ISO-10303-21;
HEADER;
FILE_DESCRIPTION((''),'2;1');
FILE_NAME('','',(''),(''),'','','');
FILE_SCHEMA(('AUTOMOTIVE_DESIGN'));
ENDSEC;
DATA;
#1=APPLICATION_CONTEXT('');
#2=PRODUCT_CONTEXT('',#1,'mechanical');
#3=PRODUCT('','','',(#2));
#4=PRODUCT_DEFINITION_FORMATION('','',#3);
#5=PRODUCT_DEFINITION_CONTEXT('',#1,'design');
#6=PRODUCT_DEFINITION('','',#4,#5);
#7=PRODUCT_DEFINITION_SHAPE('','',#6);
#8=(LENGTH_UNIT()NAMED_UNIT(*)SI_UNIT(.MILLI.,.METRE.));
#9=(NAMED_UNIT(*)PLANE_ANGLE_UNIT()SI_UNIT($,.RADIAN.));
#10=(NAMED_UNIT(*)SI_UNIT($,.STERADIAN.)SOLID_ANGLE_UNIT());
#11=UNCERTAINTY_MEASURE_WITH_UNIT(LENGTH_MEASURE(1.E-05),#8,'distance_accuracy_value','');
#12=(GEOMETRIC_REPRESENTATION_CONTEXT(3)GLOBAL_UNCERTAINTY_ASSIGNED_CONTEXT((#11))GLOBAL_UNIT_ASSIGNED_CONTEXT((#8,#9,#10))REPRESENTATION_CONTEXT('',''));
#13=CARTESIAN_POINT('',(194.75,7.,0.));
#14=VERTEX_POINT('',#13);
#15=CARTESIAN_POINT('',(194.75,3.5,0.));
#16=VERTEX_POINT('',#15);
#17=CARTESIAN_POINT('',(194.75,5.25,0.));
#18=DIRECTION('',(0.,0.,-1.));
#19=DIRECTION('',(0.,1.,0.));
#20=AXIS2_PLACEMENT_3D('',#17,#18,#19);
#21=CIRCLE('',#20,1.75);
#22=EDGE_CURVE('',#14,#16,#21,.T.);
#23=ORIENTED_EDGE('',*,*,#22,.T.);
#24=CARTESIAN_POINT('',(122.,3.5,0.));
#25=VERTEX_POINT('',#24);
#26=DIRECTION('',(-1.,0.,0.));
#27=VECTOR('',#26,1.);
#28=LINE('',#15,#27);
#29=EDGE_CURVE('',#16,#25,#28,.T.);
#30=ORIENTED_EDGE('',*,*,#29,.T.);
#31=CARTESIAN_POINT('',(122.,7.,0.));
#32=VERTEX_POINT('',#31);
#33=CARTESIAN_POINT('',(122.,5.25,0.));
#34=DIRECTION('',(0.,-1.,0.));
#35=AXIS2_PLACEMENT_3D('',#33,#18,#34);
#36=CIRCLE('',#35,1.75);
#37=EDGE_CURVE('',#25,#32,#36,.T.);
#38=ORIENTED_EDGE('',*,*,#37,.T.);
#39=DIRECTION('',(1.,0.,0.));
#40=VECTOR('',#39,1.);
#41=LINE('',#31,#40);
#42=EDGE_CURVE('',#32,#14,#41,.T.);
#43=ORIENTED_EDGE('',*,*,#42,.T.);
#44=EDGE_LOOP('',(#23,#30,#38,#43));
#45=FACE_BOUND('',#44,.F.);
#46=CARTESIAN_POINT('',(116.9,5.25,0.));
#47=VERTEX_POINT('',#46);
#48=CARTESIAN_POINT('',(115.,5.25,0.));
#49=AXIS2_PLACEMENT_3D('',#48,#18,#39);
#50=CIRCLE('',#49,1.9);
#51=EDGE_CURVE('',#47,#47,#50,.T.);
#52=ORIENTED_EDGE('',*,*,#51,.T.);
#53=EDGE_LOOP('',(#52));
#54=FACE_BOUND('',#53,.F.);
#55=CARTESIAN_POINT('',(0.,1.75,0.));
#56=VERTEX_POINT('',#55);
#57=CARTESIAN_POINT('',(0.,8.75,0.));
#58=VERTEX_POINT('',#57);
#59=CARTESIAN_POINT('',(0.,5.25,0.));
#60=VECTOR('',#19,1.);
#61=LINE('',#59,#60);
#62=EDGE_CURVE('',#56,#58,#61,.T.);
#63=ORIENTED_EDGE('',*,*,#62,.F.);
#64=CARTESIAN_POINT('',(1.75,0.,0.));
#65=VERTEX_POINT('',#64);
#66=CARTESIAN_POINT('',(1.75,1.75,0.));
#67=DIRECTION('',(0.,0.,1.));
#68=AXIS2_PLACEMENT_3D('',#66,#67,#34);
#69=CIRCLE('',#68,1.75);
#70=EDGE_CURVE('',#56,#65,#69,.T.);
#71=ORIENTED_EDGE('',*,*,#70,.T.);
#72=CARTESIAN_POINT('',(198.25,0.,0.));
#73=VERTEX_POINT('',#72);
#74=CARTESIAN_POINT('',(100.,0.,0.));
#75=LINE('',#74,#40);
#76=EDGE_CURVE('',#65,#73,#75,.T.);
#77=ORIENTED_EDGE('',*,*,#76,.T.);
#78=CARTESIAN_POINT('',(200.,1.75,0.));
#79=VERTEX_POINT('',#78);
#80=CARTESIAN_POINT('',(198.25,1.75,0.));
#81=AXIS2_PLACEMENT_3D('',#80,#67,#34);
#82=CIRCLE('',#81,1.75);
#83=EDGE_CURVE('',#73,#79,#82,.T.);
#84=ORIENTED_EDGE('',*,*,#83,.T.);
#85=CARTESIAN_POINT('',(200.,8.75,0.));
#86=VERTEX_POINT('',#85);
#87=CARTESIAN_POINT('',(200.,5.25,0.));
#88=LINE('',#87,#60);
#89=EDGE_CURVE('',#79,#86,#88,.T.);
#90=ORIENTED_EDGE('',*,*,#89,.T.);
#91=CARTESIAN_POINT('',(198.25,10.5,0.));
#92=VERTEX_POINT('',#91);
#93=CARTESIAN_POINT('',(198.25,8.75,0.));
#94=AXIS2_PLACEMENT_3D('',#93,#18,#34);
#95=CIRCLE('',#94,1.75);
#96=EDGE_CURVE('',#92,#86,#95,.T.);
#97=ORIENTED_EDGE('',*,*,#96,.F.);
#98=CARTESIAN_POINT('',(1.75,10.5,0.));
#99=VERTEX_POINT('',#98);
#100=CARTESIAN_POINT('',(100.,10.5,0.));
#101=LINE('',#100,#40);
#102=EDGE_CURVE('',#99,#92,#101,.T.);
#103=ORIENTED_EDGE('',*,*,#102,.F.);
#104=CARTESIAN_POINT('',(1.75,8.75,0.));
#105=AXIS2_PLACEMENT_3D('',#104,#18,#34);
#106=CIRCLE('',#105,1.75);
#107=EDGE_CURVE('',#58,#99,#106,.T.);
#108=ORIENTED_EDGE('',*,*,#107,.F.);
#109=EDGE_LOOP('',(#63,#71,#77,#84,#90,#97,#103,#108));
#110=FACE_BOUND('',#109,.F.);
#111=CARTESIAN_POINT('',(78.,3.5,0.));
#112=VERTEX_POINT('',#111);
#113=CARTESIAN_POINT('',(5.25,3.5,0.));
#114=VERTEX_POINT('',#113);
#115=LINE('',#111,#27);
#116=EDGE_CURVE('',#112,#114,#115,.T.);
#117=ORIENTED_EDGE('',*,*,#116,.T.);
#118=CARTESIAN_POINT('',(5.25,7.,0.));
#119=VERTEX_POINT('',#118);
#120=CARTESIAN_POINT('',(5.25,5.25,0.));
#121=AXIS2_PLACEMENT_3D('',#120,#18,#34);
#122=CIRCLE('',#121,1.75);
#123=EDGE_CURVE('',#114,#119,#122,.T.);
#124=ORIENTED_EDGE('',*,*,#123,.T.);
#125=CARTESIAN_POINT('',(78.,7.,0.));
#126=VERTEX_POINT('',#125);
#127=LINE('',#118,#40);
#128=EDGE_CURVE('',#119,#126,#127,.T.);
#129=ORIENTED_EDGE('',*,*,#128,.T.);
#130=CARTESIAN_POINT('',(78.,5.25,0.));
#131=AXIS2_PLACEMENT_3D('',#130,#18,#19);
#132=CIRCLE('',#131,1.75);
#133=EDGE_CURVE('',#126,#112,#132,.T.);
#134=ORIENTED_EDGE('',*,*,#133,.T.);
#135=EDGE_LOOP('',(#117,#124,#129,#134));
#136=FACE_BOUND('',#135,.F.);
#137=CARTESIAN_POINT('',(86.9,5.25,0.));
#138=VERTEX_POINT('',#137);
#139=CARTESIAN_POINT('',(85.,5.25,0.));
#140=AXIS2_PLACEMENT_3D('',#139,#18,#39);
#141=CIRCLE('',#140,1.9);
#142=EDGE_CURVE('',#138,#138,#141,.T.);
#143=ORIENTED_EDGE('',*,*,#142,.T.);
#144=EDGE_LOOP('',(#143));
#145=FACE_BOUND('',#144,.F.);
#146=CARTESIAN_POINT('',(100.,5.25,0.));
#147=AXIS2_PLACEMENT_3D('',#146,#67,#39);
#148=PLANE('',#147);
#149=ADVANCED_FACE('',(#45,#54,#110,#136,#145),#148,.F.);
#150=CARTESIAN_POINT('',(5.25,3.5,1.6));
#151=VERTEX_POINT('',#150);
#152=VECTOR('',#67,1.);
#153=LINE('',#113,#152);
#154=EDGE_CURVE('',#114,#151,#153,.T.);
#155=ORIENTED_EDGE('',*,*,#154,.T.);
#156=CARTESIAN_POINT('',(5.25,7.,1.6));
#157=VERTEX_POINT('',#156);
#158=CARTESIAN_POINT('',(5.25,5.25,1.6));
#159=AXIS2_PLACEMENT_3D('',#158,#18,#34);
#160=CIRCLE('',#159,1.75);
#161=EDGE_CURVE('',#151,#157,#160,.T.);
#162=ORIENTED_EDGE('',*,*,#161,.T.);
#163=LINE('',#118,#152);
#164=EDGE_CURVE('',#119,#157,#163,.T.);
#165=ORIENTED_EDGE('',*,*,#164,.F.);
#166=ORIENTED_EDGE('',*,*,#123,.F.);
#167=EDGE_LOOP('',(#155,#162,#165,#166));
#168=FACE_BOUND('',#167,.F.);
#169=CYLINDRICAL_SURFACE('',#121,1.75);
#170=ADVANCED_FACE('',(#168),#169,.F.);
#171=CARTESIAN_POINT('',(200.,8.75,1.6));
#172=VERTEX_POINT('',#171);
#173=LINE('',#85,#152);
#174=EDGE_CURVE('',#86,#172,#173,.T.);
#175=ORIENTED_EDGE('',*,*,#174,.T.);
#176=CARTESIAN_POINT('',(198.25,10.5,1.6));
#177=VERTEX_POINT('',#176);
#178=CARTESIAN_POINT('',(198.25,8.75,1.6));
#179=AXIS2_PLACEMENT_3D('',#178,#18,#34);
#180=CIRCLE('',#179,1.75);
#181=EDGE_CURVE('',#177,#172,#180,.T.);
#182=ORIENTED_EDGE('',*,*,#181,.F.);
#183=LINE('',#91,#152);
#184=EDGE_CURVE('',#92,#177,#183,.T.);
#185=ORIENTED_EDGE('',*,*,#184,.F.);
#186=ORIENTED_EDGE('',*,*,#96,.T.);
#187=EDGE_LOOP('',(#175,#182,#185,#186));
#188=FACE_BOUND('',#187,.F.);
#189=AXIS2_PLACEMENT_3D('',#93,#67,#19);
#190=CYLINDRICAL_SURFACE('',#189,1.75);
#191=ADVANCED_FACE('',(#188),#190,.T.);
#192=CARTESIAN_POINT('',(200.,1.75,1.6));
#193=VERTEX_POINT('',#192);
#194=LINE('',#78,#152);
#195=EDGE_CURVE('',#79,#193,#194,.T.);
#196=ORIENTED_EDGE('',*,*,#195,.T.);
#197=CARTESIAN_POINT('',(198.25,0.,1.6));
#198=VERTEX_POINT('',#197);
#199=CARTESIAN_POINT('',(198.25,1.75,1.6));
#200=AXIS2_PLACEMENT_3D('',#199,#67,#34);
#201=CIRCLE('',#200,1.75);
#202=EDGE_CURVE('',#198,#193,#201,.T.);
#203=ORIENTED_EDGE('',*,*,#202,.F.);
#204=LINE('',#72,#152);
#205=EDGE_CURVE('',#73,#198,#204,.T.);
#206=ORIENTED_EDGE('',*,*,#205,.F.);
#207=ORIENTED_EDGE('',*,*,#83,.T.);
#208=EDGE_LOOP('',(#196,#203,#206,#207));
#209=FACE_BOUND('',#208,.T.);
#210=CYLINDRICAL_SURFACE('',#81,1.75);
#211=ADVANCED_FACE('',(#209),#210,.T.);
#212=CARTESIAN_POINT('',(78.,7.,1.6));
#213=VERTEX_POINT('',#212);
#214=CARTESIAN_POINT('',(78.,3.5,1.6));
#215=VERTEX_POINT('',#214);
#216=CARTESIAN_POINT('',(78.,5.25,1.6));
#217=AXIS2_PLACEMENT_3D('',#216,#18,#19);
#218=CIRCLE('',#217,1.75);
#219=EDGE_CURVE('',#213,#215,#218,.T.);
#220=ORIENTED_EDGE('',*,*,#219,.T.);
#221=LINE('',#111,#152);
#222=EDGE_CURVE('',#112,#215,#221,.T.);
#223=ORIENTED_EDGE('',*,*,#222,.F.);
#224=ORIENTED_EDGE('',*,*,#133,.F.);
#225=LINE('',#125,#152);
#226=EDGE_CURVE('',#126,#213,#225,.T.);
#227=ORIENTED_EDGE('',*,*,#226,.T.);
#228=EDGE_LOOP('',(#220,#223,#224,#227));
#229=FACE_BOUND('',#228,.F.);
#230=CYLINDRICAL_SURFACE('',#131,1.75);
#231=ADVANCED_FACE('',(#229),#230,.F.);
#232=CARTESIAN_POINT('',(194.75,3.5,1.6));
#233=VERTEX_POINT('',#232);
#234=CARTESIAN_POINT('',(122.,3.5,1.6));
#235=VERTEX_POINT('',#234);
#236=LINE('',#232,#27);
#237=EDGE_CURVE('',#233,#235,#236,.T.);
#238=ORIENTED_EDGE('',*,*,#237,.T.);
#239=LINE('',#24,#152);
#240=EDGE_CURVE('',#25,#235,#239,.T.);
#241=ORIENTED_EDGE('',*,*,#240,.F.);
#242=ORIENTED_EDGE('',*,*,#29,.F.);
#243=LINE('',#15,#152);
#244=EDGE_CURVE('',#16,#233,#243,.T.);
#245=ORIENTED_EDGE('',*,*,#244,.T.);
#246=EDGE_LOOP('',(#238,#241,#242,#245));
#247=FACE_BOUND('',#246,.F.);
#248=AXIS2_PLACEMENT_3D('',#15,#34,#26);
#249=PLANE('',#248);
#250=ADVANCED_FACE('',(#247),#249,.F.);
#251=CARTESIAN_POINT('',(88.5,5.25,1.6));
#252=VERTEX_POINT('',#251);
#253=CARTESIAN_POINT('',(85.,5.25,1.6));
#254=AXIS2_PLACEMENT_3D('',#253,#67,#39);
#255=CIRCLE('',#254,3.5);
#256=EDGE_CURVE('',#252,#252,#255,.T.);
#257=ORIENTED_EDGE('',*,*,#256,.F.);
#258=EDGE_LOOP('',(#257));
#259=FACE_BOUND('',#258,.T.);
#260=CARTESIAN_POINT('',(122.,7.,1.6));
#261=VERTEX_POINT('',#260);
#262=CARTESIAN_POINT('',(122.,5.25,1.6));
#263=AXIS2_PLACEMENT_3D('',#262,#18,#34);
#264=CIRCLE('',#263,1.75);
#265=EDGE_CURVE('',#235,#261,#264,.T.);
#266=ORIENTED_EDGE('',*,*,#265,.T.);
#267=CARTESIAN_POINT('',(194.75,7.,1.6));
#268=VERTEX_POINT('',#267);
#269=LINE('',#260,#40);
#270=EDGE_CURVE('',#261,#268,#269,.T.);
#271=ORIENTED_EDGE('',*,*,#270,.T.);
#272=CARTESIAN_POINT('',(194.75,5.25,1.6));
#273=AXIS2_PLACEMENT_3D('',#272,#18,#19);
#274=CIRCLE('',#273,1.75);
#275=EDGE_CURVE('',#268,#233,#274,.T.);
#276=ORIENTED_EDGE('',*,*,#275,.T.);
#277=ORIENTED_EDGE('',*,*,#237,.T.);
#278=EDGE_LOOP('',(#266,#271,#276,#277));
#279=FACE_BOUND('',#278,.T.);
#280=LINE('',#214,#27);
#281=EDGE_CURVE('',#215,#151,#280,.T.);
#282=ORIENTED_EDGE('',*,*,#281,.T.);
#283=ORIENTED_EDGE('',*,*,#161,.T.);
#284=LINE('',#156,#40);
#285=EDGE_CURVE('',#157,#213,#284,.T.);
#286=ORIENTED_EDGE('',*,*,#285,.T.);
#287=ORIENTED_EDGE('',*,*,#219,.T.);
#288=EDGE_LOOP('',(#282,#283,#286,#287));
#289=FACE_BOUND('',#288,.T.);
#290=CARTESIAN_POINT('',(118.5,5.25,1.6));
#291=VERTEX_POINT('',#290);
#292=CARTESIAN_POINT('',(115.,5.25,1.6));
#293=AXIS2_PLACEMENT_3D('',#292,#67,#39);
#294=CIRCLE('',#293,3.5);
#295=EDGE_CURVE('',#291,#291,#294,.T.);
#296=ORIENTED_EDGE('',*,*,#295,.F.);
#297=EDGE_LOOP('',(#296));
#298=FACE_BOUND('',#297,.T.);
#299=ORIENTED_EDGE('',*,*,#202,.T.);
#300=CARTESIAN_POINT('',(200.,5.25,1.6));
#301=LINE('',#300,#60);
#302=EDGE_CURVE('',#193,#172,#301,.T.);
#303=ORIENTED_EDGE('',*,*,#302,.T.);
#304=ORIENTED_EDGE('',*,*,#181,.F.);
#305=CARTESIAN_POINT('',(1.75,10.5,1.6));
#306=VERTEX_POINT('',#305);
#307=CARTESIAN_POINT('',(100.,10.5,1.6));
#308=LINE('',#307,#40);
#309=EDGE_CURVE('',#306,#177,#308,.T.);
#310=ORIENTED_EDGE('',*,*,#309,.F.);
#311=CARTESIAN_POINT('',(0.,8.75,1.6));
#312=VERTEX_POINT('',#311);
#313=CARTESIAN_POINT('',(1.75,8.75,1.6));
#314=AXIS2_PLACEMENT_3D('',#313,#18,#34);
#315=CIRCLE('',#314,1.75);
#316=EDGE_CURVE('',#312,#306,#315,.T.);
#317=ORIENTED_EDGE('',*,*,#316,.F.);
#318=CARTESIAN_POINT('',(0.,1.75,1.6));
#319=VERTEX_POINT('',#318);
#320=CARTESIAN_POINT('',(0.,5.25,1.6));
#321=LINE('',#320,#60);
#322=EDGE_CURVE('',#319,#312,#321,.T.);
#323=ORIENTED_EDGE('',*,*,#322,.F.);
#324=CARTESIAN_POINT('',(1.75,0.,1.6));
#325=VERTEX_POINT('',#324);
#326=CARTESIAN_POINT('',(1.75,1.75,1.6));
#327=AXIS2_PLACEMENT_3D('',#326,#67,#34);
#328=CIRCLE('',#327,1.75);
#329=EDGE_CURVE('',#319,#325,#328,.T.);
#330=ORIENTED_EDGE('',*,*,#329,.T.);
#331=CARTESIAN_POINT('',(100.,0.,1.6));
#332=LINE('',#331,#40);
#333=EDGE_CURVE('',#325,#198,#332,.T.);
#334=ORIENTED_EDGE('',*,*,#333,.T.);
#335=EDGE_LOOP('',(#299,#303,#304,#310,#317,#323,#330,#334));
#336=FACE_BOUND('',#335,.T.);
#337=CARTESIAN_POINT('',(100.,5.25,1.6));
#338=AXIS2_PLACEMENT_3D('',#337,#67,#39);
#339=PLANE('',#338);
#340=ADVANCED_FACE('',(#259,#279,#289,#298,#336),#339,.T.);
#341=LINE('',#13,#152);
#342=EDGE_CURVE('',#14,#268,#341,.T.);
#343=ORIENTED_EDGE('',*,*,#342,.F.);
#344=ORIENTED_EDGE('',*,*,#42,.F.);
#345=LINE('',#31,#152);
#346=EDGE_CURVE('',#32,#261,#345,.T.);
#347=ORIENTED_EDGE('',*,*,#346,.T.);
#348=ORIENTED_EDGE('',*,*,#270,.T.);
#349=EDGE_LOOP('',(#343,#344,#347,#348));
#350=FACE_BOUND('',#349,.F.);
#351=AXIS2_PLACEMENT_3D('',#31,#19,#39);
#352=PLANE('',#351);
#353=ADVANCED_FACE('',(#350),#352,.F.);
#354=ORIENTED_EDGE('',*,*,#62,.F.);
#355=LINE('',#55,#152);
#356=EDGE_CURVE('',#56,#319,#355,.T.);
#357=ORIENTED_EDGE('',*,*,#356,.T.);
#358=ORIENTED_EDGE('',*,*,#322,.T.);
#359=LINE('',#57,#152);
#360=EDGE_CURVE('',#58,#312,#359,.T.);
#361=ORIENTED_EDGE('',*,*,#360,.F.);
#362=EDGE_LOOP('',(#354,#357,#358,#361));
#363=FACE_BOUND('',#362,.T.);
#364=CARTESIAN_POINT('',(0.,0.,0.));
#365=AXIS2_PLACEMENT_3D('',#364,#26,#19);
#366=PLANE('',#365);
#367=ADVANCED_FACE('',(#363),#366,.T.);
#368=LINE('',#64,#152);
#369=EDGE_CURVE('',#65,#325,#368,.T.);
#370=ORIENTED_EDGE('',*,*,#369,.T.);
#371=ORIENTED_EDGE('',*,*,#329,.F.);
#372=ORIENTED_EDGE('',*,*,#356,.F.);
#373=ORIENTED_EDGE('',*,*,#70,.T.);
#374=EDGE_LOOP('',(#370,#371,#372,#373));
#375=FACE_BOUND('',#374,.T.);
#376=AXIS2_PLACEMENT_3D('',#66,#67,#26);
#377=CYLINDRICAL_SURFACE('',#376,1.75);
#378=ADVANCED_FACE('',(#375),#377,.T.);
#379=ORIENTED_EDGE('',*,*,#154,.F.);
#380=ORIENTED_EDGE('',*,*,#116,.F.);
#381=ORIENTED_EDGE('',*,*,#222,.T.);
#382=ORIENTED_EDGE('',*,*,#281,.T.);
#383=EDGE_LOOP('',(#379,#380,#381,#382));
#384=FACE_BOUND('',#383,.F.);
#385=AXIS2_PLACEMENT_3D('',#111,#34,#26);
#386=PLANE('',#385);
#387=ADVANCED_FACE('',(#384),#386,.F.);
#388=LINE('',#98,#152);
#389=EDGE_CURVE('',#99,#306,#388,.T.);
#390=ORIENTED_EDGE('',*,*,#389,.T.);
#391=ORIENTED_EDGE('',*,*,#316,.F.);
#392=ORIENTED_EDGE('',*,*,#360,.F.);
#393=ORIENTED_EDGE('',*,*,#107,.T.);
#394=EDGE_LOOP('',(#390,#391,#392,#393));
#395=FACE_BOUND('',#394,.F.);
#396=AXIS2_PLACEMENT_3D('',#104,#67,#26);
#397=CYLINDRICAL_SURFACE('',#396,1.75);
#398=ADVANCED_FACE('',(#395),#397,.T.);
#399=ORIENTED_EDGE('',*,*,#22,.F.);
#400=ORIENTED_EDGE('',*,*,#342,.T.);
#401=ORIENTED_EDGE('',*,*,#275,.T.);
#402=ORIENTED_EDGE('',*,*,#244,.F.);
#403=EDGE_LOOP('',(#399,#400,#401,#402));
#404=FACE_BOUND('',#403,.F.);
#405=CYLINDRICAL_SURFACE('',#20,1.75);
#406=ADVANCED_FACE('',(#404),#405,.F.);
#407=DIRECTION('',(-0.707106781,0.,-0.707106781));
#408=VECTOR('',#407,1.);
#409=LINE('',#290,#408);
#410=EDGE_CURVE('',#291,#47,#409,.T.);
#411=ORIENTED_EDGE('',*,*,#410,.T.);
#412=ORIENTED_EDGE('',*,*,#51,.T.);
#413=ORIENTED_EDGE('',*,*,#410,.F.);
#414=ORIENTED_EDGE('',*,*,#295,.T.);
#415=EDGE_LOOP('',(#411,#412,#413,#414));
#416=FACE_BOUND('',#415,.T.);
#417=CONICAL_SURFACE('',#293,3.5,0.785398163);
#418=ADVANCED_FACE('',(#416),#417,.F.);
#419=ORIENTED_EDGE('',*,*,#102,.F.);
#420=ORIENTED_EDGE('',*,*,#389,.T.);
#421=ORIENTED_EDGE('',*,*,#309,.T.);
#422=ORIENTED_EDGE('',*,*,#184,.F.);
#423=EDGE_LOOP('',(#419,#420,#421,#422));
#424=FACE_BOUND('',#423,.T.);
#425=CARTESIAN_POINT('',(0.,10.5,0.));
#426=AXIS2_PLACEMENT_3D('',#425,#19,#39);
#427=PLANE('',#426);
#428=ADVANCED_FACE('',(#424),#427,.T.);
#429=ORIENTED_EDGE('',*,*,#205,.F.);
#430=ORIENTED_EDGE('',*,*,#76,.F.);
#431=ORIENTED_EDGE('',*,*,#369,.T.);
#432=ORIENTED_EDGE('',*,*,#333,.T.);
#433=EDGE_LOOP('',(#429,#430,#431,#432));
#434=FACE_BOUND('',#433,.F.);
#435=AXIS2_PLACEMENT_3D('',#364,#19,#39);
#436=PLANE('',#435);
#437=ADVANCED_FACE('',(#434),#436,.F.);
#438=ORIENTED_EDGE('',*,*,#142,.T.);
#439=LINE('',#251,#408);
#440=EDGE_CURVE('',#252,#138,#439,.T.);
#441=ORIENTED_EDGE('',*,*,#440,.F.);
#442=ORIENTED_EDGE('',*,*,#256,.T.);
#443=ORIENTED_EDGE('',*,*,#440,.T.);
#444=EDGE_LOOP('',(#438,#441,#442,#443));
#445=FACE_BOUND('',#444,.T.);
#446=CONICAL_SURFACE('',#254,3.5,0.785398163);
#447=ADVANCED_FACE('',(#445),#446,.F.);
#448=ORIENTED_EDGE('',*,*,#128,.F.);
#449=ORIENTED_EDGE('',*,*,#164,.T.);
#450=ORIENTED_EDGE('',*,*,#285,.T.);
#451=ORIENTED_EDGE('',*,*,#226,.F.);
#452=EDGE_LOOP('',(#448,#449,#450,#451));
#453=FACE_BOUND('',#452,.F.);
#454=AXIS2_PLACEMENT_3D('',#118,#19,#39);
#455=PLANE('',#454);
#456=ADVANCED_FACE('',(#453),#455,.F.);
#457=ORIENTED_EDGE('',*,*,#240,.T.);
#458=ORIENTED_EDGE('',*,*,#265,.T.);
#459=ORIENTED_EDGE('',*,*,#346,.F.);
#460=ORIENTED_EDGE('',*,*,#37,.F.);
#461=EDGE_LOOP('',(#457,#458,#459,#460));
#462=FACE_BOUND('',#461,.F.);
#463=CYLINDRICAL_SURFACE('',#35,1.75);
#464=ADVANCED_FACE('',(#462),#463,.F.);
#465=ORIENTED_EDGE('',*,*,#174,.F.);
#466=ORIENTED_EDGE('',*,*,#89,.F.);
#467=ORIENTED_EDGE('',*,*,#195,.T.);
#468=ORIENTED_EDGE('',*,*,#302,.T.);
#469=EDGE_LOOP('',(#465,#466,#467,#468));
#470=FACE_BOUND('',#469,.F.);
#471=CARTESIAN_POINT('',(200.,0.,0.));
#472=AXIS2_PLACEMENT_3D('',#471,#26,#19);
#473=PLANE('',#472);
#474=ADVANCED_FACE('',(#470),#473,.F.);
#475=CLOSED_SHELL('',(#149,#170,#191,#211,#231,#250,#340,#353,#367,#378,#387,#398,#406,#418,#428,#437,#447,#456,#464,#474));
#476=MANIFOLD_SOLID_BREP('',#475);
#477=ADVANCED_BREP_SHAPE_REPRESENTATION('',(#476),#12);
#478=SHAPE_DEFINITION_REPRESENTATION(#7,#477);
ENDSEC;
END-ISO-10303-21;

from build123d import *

# Parameters (mm, degrees)
F1_W     = 200
F1_H     = 10.5
F1_R     = 1.75
F2_DEPTH = 1.6
F3_R     = 1.75


# Not quite as in the source:
# - a fillet or chamfer that OpenCascade refuses, or shapes differently, is made with other operations: its cross-section is extruded or revolved along the edge and cut away or added
# - a feature names something its author has since deleted; it is built from what else it names


with BuildPart() as f2:
    # F1 (on Top) → F2 (new body)
    with BuildSketch(Plane.XY):
        with Locations((100, 5.25)):
            Rectangle(F1_W, F1_H)
        with BuildLine():
            ThreePointArc((78, 7), (79.75, 5.25), (78, 3.5))
            Line((78, 3.5), (5.25, 3.5))
            ThreePointArc((5.25, 3.5), (3.5, 5.25), (5.25, 7))
            Line((5.25, 7), (78, 7))
        make_face(mode=Mode.SUBTRACT)
        with Locations((85, 5.25)):
            Circle(F1_R, mode=Mode.SUBTRACT)
        with Locations((115, 5.25)):
            Circle(F1_R, mode=Mode.SUBTRACT)
        with BuildLine():
            Line((122, 7), (194.75, 7))
            ThreePointArc((194.75, 7), (196.5, 5.25), (194.75, 3.5))
            Line((194.75, 3.5), (122, 3.5))
            ThreePointArc((122, 3.5), (120.25, 5.25), (122, 7))
        make_face(mode=Mode.SUBTRACT)
    extrude(amount=F2_DEPTH)

    # F3
    f3_edges = [f2.edges().sort_by_distance(p)[0] for p in [
        (0, 10.5, 0.8),
        (0, 0, 0.8),
        (200, 0, 0.8),
        (200, 10.5, 0.8),
    ]]
    fillet(f3_edges, radius=F3_R)

    # F4: chamfer of 1.75 on 2 edges, made by hand

    # F4_s1 → F4_t2 (revolve, cut)
    with BuildSketch(Plane.XZ.offset(-5.25)):
        Polygon((88.5, 1.6), (86.75, -0.15), (86.75, 1.6), align=None)
    revolve(axis=Axis((85, 5.25, 1.6), (0, 0, 1)), mode=Mode.SUBTRACT)

    # F4_s3 → F4_t4 (revolve, cut)
    with BuildSketch(Plane.XZ.offset(-5.25)):
        Polygon((118.5, 1.6), (116.75, -0.15), (116.75, 1.6), align=None)
    revolve(axis=Axis((115, 5.25, 1.6), (0, 0, 1)), mode=Mode.SUBTRACT)


solid = f2.part
